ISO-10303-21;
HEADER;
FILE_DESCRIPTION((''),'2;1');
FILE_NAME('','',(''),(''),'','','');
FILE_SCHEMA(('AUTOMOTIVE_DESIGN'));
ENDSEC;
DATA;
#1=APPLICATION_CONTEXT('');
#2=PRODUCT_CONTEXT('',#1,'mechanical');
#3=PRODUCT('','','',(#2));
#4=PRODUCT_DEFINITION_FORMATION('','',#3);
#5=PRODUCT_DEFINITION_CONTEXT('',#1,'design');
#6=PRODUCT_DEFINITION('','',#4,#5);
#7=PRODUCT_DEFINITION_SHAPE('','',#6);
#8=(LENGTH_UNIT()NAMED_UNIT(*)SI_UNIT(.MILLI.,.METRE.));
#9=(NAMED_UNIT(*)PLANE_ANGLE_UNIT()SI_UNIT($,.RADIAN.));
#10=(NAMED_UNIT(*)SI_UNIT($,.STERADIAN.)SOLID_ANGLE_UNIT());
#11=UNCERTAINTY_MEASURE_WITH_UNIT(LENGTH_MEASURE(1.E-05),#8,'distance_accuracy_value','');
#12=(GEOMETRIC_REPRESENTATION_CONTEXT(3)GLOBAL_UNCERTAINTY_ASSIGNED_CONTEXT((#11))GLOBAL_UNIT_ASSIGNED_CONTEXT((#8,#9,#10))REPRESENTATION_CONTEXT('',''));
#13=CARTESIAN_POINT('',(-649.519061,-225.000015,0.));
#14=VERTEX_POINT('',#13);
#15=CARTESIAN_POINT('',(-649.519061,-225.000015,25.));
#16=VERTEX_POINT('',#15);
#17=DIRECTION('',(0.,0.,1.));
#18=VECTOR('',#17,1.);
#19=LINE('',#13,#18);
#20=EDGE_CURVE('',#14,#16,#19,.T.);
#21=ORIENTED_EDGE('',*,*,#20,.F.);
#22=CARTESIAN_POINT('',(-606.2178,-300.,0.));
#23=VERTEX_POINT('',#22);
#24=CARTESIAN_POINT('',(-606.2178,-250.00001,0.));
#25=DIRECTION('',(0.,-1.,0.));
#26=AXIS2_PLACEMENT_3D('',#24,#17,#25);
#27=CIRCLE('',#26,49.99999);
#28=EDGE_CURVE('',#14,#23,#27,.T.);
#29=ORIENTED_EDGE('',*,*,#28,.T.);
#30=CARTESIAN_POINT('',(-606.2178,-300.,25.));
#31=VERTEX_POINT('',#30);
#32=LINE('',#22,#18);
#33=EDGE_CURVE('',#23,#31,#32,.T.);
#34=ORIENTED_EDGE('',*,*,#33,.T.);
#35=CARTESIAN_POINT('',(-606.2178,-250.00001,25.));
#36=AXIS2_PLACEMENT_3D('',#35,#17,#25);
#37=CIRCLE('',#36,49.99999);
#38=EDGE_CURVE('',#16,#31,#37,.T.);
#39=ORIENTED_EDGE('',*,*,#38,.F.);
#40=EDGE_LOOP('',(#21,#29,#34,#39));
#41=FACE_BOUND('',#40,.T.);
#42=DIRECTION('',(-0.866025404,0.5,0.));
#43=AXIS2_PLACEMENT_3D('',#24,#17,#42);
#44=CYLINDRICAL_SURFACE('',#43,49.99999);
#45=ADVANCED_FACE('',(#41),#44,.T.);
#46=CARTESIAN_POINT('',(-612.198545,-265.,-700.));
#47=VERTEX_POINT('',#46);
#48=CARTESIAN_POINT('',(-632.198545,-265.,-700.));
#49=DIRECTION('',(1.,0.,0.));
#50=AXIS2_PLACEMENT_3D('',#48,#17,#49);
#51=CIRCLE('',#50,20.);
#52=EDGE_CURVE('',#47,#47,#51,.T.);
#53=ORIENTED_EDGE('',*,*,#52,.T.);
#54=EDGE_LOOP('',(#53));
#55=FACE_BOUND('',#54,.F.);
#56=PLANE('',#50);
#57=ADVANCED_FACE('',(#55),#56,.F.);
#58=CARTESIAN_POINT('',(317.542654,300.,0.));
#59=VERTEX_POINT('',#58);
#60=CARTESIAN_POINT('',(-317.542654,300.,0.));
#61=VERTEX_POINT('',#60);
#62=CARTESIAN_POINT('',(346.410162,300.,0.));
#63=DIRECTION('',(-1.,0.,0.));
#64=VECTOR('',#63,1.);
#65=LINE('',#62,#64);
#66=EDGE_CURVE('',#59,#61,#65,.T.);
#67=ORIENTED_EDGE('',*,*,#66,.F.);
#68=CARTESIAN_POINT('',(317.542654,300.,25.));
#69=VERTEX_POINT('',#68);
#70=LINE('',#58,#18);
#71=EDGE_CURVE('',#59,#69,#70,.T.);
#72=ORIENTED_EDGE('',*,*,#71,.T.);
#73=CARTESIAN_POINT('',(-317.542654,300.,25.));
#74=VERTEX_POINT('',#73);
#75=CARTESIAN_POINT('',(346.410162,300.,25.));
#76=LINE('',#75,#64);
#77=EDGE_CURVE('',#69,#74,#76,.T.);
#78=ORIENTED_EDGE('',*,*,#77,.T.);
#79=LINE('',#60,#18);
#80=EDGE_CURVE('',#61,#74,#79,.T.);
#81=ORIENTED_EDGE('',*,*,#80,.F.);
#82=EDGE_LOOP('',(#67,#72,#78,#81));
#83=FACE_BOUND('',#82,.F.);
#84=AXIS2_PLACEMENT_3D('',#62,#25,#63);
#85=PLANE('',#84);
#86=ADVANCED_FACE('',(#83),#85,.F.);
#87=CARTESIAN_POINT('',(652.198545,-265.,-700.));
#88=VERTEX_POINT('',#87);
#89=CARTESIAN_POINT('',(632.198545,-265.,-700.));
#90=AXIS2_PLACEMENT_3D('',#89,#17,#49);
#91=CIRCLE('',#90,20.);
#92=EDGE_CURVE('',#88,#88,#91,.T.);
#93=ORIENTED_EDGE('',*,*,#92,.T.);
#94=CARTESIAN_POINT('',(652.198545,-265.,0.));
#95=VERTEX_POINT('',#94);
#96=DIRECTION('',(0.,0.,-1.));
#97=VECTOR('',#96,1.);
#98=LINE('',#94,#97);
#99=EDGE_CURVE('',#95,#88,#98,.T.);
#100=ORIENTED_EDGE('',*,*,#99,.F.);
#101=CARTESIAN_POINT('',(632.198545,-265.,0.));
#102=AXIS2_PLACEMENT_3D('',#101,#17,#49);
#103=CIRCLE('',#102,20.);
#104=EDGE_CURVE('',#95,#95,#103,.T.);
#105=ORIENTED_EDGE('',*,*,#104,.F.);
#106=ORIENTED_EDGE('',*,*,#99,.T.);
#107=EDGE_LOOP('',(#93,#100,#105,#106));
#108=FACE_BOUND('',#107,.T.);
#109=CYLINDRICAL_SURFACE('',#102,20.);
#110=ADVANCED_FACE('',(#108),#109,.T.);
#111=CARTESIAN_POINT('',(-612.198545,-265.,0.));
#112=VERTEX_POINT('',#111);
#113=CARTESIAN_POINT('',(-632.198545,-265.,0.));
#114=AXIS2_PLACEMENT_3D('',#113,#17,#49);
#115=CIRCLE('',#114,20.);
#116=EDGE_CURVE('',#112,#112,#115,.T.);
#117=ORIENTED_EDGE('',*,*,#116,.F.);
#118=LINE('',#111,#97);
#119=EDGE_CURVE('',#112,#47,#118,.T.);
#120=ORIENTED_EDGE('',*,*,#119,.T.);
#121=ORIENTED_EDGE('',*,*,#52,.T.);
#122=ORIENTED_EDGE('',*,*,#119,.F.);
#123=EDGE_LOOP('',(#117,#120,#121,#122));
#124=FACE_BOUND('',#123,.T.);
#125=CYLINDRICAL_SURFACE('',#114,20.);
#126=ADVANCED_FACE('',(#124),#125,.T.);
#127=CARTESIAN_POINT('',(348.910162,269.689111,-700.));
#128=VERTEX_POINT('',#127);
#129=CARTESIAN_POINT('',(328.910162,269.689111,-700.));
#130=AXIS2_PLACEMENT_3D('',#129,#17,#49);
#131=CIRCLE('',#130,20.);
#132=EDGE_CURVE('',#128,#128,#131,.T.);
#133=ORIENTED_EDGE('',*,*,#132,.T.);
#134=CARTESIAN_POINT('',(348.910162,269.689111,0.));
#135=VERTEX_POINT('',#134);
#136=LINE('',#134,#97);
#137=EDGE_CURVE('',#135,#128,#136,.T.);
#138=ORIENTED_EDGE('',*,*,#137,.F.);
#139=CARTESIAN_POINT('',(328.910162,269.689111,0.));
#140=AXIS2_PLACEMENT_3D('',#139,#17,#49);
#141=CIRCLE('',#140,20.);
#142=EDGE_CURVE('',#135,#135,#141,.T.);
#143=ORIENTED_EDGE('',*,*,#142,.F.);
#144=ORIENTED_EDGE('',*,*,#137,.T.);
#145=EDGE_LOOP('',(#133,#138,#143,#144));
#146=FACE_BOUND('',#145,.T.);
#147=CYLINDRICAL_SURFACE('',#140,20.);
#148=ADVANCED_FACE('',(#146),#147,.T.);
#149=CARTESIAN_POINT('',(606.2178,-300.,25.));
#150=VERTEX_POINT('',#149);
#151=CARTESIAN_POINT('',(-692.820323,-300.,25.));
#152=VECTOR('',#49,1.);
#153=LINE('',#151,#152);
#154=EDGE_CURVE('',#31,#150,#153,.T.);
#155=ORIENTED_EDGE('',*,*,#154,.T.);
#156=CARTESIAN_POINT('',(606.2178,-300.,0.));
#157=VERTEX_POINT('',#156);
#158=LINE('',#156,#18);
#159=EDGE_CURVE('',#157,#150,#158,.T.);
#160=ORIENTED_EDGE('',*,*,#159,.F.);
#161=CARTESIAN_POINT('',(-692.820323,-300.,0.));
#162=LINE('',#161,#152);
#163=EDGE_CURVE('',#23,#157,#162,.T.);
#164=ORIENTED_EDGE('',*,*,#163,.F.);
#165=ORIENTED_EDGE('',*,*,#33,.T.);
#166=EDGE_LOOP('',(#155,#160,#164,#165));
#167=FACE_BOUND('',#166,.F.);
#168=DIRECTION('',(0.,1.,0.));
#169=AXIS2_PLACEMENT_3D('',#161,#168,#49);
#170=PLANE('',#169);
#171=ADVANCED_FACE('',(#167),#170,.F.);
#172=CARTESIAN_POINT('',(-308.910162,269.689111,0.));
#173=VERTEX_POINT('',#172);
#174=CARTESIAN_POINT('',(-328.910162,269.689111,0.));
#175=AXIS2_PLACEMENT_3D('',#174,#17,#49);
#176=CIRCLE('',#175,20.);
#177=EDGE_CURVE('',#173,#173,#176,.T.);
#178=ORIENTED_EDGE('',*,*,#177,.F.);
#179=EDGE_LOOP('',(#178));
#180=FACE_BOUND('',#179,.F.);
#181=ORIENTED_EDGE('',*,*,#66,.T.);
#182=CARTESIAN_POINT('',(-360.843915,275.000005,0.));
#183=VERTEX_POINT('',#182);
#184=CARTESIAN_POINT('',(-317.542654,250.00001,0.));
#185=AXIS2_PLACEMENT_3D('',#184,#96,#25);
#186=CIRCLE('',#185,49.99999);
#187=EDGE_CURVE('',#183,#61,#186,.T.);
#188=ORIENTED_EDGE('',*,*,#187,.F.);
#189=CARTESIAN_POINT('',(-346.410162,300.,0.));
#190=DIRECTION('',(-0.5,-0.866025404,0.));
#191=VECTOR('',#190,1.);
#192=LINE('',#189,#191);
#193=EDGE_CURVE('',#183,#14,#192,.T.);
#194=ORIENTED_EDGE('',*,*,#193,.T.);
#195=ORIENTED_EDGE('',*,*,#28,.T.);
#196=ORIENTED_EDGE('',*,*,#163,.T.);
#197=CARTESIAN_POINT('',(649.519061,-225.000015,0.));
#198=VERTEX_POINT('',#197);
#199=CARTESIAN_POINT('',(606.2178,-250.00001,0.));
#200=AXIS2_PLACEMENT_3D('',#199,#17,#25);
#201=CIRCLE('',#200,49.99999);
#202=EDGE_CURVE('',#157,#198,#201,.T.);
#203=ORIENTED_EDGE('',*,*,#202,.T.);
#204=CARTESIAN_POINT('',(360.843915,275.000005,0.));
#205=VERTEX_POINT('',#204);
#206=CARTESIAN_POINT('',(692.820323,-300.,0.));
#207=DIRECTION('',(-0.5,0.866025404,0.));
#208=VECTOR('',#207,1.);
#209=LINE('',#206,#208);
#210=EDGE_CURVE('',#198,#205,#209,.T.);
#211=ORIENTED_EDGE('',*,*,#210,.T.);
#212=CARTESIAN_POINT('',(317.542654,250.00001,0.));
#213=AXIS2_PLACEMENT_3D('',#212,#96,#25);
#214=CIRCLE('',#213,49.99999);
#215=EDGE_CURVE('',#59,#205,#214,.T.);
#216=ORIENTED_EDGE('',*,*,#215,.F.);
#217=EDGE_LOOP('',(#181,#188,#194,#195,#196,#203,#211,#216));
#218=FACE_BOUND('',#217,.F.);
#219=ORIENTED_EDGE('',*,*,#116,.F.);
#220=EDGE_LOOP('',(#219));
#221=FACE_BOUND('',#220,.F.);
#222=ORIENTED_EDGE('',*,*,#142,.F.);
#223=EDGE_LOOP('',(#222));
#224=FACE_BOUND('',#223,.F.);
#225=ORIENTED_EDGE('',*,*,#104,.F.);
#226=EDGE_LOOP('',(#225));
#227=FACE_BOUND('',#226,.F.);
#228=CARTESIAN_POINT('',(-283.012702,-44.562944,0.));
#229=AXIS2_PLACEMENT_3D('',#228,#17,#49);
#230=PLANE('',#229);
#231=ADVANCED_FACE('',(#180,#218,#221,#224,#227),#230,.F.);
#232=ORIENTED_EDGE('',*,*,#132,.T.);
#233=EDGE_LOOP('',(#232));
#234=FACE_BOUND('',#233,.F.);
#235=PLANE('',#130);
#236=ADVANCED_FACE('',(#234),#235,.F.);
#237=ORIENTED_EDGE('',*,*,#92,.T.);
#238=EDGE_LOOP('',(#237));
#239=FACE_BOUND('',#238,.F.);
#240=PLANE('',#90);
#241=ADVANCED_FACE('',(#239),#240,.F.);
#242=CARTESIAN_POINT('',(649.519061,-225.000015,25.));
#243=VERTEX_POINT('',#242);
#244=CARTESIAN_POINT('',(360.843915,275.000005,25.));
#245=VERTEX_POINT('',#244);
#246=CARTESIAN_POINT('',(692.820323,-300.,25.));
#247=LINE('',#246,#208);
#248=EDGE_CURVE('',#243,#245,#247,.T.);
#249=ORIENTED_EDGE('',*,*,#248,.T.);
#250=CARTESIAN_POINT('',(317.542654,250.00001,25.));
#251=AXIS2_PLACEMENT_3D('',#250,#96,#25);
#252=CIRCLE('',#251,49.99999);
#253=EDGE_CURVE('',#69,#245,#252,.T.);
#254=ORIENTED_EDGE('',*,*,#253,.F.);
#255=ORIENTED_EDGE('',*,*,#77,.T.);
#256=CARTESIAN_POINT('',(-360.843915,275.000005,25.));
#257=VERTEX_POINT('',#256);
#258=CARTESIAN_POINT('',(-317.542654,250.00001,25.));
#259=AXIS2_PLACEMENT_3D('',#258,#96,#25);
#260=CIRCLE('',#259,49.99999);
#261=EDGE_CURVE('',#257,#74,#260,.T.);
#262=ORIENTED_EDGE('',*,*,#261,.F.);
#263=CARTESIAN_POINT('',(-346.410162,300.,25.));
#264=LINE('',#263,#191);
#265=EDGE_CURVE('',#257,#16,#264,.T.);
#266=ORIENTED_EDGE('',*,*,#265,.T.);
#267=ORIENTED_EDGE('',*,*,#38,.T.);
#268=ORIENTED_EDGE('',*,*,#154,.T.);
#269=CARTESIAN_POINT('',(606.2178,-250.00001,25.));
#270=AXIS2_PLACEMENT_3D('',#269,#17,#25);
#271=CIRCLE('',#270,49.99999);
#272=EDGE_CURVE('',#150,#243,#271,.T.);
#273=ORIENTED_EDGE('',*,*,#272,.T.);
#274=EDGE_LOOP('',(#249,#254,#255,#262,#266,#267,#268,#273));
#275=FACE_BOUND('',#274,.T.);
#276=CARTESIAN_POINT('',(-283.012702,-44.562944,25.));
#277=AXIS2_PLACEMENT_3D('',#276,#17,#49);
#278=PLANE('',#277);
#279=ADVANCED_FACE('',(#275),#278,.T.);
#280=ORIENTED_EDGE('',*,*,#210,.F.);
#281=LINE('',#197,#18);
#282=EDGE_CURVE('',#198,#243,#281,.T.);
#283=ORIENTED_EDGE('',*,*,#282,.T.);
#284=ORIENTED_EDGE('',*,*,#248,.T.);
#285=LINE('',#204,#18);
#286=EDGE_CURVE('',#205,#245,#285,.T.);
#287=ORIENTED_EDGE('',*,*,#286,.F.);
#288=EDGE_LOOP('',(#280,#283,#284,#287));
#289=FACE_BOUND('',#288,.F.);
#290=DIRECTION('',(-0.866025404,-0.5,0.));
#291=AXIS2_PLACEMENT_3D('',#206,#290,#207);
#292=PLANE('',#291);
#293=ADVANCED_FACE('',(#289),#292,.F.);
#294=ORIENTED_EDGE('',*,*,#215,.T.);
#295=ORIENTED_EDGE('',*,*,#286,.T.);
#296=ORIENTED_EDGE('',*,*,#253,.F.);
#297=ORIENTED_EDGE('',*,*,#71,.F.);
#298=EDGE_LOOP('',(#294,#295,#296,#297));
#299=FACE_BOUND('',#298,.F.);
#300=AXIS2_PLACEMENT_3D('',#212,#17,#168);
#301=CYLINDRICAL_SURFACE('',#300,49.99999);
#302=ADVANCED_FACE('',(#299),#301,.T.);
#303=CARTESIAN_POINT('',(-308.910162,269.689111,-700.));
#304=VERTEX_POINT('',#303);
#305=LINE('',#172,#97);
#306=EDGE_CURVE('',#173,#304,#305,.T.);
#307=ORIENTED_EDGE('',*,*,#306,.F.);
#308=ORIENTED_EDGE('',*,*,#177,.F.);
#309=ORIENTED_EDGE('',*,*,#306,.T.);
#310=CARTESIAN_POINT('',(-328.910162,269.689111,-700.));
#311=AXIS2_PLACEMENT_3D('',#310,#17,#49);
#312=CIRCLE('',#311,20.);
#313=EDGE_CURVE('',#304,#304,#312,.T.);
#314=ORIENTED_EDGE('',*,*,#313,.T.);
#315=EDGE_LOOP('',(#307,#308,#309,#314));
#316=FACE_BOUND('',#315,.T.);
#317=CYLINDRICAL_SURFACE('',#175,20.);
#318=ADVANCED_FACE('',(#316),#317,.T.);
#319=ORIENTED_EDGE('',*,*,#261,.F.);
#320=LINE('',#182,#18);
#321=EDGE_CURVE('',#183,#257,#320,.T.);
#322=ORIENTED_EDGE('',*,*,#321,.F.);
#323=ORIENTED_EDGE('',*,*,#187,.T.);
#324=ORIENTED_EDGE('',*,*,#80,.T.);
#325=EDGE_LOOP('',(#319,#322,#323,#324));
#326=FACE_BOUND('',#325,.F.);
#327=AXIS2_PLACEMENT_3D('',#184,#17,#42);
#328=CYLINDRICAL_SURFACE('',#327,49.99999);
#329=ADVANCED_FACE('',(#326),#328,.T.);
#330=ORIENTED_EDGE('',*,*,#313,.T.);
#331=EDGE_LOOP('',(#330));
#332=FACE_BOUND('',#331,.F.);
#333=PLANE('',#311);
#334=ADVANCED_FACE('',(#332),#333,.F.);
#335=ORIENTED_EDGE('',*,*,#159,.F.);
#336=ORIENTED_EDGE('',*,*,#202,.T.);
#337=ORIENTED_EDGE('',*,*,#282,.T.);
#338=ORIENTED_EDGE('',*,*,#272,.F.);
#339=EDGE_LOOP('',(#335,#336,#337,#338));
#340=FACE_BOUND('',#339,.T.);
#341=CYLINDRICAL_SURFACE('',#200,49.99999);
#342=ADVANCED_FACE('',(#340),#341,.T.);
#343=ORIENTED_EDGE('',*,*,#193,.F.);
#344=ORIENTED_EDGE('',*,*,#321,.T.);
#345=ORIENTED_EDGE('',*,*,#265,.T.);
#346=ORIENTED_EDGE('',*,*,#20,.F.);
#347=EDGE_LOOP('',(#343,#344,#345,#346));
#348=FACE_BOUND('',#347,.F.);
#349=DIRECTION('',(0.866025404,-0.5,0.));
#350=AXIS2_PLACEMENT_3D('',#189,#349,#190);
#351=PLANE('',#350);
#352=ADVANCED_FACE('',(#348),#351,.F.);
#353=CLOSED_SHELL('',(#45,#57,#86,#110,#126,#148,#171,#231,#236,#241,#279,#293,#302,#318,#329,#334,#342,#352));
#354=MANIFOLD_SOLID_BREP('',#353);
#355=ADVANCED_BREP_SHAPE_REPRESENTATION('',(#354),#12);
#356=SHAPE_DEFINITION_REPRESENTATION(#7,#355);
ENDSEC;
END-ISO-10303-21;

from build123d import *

# Parameters (mm, degrees)
F2_DEPTH = 25
F1_R     = 20
F3_DEPTH = 700
F4_R     = 49.99999


# Not quite as in the source:
# - a fillet or chamfer is up to 0.001 mm smaller than in the source, because OpenCascade refuses the exact size


with BuildPart() as f2:
    # F0 (on Top) → F2 (new body)
    with BuildSketch(Plane.XY):
        Polygon((0, 0), (0, 300), (-346.4101615138, 300), (-692.8203230276, -300), (0, -300), align=None)
        Polygon((346.4101615138, 300), (0, 300), (0, 0), (0, -300), (692.8203230276, -300), align=None)
    extrude(amount=F2_DEPTH)

    # F1 (on Top) → F3 (join)
    with BuildSketch(Plane.XY):
        with Locations((-328.9101615138, 269.6891108675)):
            Circle(F1_R)
        with Locations((-632.1985447626, -265)):
            Circle(F1_R)
        with Locations((328.9101615138, 269.6891108675)):
            Circle(F1_R)
        with Locations((632.1985447626, -265)):
            Circle(F1_R)
    extrude(amount=-F3_DEPTH)

    # F4 (radius 50 in the source; OpenCascade refuses exactly that, so slightly less here)
    f4_edges = [f2.edges().sort_by_distance(p)[0] for p in [
        (-692.820323, -300, 12.5),
        (-346.410162, 300, 12.5),
        (346.410162, 300, 12.5),
        (692.820323, -300, 12.5),
    ]]
    fillet(f4_edges, radius=F4_R)


solid = f2.part
